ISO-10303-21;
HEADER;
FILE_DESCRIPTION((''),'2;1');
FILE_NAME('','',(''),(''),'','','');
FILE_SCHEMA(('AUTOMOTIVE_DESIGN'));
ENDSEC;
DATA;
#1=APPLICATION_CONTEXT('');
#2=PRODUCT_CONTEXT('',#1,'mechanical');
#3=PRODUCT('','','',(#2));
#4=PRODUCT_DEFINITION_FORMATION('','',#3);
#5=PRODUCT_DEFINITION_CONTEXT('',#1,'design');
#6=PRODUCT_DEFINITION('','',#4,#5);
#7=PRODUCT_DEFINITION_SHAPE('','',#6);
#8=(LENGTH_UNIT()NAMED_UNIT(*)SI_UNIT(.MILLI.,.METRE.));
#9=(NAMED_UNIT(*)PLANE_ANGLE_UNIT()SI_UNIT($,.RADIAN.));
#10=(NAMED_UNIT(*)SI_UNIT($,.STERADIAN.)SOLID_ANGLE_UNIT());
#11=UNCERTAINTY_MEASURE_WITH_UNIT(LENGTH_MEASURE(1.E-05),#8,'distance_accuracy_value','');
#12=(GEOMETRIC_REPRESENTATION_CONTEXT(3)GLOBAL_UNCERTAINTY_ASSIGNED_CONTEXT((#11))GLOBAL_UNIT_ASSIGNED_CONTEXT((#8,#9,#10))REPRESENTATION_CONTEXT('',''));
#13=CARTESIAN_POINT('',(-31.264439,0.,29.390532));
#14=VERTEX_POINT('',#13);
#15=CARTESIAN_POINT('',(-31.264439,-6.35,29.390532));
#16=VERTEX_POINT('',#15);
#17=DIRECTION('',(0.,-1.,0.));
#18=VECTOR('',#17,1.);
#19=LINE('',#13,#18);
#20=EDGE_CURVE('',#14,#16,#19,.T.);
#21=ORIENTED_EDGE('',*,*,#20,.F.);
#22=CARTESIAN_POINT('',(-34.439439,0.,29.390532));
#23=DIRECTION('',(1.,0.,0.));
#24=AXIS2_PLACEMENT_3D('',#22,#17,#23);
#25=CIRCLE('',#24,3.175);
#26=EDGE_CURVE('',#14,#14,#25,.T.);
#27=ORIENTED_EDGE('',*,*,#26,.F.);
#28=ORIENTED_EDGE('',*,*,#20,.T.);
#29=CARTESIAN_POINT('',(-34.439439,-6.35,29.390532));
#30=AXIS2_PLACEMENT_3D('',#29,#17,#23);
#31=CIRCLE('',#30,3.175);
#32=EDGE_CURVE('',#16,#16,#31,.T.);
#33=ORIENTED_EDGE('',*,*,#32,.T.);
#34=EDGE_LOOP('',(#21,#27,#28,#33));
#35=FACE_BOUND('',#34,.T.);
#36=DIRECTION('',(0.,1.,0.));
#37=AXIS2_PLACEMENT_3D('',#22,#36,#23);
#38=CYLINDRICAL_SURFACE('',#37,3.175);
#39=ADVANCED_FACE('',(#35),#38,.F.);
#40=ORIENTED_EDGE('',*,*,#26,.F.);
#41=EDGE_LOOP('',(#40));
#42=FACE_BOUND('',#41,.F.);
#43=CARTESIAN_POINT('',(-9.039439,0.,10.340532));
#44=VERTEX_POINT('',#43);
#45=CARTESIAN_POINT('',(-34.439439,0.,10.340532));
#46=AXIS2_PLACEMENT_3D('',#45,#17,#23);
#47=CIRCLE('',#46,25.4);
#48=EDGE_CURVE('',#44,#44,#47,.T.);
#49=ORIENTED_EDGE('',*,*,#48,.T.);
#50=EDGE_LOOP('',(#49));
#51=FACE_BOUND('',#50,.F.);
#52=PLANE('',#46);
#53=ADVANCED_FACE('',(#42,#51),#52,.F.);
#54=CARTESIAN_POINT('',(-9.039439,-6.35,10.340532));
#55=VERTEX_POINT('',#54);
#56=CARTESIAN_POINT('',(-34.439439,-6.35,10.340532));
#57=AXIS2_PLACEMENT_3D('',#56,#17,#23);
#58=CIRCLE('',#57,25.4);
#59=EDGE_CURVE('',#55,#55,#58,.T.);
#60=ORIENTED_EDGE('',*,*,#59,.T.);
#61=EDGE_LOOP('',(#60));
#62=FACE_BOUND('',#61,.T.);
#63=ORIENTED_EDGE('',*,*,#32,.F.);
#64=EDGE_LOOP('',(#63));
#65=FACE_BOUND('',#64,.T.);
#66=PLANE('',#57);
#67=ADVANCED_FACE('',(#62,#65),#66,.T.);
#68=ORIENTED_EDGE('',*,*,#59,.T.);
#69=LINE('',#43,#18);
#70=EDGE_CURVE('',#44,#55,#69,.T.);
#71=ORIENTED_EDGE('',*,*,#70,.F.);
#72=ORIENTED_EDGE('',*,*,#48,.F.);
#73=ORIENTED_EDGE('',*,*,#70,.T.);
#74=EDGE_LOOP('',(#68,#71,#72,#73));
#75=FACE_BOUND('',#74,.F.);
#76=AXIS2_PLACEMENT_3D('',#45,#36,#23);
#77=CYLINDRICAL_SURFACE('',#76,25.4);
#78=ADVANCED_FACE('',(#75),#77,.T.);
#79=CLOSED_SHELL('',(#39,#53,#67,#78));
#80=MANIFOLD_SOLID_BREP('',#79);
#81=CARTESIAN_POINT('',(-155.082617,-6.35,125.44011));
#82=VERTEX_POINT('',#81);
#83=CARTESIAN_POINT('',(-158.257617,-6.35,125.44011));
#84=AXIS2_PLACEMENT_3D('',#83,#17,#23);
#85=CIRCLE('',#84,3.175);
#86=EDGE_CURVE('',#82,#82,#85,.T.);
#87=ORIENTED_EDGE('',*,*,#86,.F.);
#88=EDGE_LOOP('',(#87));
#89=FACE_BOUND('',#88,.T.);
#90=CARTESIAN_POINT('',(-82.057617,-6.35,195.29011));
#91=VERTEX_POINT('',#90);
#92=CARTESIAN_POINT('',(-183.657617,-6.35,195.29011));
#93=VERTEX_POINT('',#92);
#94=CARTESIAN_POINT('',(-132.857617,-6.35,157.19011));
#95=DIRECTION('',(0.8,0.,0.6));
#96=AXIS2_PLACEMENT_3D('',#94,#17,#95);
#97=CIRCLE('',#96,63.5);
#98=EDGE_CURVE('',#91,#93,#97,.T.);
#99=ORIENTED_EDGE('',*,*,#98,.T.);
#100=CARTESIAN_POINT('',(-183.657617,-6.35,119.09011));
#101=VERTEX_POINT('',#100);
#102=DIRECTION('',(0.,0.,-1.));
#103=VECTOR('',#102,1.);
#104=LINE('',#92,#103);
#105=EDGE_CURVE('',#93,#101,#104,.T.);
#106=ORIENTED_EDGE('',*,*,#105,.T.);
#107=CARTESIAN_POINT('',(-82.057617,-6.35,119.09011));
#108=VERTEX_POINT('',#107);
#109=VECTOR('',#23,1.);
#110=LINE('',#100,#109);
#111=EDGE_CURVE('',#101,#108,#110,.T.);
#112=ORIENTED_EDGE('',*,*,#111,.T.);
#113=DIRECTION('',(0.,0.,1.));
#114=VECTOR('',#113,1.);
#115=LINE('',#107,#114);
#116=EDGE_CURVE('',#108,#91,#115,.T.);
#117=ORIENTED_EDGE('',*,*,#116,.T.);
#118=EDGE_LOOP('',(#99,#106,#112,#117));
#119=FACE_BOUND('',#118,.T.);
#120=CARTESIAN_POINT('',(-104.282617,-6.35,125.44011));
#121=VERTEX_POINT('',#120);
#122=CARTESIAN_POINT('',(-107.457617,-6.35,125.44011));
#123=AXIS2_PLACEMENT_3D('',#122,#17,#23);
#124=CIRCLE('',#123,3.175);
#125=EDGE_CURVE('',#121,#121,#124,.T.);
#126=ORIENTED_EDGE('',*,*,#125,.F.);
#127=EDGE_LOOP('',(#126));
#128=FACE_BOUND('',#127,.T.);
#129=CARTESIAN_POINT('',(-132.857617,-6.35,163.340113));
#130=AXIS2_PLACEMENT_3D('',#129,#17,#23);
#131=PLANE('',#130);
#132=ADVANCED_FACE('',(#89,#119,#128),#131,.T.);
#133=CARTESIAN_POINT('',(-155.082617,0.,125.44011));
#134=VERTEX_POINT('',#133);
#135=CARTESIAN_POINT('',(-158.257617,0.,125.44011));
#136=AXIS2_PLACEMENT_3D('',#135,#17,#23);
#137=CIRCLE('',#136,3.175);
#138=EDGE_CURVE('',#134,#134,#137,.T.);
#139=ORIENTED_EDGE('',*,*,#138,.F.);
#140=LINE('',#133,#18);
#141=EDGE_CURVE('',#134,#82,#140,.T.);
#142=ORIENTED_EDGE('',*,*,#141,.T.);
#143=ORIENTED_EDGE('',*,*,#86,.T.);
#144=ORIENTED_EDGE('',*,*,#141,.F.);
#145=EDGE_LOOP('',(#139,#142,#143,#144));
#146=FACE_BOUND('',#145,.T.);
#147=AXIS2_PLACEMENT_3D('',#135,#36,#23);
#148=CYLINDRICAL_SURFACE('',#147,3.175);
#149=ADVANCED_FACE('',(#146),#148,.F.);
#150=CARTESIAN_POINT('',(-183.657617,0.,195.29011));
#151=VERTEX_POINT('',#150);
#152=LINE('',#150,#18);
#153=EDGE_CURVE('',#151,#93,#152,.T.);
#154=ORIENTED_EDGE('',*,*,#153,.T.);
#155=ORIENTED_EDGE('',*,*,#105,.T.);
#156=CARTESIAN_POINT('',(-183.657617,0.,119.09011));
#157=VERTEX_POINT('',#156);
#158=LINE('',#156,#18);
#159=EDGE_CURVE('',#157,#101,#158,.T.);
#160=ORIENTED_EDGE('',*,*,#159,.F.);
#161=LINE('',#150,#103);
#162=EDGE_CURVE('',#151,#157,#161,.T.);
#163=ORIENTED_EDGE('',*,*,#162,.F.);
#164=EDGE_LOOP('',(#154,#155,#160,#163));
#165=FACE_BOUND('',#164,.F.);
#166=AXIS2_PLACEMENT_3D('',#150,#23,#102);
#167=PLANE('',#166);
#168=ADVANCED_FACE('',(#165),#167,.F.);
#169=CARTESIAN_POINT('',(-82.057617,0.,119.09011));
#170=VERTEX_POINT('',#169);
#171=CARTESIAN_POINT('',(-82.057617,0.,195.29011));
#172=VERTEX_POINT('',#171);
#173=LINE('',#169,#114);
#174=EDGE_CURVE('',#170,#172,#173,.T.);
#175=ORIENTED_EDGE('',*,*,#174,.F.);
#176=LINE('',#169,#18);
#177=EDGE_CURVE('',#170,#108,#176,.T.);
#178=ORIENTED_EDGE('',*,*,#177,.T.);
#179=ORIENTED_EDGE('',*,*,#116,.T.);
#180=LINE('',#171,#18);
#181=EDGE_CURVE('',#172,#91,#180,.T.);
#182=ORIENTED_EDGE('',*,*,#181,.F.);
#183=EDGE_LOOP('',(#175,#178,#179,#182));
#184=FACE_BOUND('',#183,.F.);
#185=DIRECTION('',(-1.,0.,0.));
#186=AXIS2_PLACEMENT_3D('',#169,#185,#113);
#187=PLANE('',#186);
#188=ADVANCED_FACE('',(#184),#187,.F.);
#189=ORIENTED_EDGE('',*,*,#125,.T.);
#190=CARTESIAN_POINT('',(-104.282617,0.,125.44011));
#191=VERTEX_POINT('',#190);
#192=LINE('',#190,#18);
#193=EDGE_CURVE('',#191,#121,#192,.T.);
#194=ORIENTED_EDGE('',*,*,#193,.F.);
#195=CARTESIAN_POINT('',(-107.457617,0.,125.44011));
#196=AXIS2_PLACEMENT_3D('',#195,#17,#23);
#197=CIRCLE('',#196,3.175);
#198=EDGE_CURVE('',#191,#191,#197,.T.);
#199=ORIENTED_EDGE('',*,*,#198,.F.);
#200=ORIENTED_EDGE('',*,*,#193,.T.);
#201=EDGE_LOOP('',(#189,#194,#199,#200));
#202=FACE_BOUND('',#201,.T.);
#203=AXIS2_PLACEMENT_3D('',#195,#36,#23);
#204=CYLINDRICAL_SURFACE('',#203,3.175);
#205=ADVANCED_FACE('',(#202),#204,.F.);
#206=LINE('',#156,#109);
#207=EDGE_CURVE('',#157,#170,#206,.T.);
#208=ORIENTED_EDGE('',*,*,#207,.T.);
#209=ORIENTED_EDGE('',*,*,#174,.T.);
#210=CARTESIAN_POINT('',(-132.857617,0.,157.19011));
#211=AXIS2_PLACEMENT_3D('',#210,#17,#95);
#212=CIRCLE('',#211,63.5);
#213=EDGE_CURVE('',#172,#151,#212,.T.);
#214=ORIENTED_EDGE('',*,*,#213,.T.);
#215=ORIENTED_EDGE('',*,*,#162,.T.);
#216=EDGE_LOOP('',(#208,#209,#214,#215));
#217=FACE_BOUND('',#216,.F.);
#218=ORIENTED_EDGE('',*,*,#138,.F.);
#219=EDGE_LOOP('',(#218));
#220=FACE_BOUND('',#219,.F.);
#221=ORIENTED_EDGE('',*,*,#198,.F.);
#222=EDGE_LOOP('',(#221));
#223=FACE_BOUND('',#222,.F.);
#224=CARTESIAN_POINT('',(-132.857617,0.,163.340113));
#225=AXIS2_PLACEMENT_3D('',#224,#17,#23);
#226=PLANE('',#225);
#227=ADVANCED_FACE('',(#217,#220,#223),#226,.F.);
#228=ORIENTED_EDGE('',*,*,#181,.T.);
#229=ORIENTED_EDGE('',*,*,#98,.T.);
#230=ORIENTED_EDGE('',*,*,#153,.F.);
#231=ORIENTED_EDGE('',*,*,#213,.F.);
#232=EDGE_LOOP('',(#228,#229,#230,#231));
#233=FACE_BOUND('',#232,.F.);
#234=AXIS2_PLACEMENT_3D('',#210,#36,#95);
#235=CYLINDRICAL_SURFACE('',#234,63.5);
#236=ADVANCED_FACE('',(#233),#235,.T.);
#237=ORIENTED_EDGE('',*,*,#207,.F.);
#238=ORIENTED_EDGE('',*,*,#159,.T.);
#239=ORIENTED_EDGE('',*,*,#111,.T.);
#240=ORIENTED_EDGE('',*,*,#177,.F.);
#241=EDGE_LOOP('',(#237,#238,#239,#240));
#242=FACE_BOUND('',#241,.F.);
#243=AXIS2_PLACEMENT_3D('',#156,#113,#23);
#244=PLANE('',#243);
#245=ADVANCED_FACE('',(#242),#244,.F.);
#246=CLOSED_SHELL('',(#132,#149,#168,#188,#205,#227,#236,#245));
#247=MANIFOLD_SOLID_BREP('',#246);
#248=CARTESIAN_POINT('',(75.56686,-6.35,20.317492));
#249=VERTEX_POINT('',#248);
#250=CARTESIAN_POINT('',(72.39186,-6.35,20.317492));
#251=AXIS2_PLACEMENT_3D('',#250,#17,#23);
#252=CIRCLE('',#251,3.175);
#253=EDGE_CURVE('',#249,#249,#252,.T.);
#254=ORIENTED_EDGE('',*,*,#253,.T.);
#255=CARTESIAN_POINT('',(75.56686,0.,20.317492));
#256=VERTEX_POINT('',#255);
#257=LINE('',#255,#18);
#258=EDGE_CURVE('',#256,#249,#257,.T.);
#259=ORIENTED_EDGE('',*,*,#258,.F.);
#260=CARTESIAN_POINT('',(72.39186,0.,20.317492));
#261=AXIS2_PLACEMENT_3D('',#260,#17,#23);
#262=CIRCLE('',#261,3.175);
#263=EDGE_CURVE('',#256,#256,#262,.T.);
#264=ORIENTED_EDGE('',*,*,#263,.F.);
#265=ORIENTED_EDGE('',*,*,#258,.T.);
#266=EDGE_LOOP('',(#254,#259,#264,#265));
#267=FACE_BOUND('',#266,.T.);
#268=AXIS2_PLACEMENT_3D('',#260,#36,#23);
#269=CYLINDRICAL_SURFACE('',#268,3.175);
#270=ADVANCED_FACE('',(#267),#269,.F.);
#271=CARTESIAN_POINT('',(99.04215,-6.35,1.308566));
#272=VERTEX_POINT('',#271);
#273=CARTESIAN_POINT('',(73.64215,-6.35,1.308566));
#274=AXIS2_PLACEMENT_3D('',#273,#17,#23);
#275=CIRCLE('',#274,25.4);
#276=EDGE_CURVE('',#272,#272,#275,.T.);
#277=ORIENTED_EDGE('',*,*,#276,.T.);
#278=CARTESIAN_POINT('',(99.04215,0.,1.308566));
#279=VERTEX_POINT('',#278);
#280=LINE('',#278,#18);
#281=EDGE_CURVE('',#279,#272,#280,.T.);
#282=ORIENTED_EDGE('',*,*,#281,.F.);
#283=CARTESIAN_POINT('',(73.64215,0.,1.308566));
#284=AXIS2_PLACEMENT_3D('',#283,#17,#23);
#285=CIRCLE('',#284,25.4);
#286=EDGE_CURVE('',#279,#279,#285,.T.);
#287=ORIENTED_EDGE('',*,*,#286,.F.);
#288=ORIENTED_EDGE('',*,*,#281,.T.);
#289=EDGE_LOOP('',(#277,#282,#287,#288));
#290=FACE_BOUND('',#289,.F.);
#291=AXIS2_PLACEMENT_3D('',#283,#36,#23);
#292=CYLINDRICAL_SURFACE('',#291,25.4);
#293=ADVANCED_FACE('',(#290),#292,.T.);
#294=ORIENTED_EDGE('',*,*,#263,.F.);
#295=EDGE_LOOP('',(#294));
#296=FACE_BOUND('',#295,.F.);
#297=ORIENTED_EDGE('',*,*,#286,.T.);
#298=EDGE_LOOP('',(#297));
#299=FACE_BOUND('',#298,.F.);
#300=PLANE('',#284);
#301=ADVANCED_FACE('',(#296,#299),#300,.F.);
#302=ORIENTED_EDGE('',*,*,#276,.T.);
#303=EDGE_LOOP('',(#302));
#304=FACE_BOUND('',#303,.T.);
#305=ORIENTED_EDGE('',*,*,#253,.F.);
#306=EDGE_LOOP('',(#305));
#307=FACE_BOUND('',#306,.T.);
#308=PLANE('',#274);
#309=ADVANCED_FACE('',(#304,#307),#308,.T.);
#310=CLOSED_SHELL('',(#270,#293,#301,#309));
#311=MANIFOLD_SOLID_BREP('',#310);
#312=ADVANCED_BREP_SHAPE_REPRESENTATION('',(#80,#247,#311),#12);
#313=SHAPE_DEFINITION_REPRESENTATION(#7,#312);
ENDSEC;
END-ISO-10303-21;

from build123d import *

# Parameters (mm, degrees)
F0_R     = 3.175
F1_DEPTH = 6.35
F0_R_2   = 25.4


# Not quite as in the source:
# - a feature names something its author has since deleted; it is built from what else it names


with BuildPart() as f1:
    # F0 (on Front) → F1 (new body)
    with BuildSketch(Plane.XZ):
        with BuildLine():
            Line((-183.6576171661, 195.2901095029), (-183.6576171661, 119.0901095029))
            Line((-183.6576171661, 119.0901095029), (-82.0576171661, 119.0901095029))
            Line((-82.0576171661, 119.0901095029), (-82.0576171661, 195.2901095029))
            ThreePointArc((-82.0576171661, 195.2901095029), (-132.8576171661, 220.6901095029), (-183.6576171661, 195.2901095029))
        make_face()
        with Locations((-158.2576171661, 125.4401095029)):
            Circle(F0_R, mode=Mode.SUBTRACT)
        with Locations((-107.4576171661, 125.4401095029)):
            Circle(F0_R, mode=Mode.SUBTRACT)
    extrude(amount=F1_DEPTH)


with BuildPart() as f1b:
    # F0 (on Front) → F1, piece 2 (new body)
    with BuildSketch(Plane.XZ):
        with Locations((-34.4394389217, 10.3405317959)):
            Circle(F0_R_2)
        with Locations((-34.4394389217, 29.3905317959)):
            Circle(F0_R, mode=Mode.SUBTRACT)
    extrude(amount=F1_DEPTH)


with BuildPart() as f1c:
    # F0 (on Front) → F1, piece 3 (new body)
    with BuildSketch(Plane.XZ):
        with Locations((73.6421495676, 1.3085657265)):
            Circle(F0_R_2)
        with Locations((72.3918600443, 20.3174919484)):
            Circle(F0_R, mode=Mode.SUBTRACT)
    extrude(amount=F1_DEPTH)


solid = Compound([f1.part, f1b.part, f1c.part])
